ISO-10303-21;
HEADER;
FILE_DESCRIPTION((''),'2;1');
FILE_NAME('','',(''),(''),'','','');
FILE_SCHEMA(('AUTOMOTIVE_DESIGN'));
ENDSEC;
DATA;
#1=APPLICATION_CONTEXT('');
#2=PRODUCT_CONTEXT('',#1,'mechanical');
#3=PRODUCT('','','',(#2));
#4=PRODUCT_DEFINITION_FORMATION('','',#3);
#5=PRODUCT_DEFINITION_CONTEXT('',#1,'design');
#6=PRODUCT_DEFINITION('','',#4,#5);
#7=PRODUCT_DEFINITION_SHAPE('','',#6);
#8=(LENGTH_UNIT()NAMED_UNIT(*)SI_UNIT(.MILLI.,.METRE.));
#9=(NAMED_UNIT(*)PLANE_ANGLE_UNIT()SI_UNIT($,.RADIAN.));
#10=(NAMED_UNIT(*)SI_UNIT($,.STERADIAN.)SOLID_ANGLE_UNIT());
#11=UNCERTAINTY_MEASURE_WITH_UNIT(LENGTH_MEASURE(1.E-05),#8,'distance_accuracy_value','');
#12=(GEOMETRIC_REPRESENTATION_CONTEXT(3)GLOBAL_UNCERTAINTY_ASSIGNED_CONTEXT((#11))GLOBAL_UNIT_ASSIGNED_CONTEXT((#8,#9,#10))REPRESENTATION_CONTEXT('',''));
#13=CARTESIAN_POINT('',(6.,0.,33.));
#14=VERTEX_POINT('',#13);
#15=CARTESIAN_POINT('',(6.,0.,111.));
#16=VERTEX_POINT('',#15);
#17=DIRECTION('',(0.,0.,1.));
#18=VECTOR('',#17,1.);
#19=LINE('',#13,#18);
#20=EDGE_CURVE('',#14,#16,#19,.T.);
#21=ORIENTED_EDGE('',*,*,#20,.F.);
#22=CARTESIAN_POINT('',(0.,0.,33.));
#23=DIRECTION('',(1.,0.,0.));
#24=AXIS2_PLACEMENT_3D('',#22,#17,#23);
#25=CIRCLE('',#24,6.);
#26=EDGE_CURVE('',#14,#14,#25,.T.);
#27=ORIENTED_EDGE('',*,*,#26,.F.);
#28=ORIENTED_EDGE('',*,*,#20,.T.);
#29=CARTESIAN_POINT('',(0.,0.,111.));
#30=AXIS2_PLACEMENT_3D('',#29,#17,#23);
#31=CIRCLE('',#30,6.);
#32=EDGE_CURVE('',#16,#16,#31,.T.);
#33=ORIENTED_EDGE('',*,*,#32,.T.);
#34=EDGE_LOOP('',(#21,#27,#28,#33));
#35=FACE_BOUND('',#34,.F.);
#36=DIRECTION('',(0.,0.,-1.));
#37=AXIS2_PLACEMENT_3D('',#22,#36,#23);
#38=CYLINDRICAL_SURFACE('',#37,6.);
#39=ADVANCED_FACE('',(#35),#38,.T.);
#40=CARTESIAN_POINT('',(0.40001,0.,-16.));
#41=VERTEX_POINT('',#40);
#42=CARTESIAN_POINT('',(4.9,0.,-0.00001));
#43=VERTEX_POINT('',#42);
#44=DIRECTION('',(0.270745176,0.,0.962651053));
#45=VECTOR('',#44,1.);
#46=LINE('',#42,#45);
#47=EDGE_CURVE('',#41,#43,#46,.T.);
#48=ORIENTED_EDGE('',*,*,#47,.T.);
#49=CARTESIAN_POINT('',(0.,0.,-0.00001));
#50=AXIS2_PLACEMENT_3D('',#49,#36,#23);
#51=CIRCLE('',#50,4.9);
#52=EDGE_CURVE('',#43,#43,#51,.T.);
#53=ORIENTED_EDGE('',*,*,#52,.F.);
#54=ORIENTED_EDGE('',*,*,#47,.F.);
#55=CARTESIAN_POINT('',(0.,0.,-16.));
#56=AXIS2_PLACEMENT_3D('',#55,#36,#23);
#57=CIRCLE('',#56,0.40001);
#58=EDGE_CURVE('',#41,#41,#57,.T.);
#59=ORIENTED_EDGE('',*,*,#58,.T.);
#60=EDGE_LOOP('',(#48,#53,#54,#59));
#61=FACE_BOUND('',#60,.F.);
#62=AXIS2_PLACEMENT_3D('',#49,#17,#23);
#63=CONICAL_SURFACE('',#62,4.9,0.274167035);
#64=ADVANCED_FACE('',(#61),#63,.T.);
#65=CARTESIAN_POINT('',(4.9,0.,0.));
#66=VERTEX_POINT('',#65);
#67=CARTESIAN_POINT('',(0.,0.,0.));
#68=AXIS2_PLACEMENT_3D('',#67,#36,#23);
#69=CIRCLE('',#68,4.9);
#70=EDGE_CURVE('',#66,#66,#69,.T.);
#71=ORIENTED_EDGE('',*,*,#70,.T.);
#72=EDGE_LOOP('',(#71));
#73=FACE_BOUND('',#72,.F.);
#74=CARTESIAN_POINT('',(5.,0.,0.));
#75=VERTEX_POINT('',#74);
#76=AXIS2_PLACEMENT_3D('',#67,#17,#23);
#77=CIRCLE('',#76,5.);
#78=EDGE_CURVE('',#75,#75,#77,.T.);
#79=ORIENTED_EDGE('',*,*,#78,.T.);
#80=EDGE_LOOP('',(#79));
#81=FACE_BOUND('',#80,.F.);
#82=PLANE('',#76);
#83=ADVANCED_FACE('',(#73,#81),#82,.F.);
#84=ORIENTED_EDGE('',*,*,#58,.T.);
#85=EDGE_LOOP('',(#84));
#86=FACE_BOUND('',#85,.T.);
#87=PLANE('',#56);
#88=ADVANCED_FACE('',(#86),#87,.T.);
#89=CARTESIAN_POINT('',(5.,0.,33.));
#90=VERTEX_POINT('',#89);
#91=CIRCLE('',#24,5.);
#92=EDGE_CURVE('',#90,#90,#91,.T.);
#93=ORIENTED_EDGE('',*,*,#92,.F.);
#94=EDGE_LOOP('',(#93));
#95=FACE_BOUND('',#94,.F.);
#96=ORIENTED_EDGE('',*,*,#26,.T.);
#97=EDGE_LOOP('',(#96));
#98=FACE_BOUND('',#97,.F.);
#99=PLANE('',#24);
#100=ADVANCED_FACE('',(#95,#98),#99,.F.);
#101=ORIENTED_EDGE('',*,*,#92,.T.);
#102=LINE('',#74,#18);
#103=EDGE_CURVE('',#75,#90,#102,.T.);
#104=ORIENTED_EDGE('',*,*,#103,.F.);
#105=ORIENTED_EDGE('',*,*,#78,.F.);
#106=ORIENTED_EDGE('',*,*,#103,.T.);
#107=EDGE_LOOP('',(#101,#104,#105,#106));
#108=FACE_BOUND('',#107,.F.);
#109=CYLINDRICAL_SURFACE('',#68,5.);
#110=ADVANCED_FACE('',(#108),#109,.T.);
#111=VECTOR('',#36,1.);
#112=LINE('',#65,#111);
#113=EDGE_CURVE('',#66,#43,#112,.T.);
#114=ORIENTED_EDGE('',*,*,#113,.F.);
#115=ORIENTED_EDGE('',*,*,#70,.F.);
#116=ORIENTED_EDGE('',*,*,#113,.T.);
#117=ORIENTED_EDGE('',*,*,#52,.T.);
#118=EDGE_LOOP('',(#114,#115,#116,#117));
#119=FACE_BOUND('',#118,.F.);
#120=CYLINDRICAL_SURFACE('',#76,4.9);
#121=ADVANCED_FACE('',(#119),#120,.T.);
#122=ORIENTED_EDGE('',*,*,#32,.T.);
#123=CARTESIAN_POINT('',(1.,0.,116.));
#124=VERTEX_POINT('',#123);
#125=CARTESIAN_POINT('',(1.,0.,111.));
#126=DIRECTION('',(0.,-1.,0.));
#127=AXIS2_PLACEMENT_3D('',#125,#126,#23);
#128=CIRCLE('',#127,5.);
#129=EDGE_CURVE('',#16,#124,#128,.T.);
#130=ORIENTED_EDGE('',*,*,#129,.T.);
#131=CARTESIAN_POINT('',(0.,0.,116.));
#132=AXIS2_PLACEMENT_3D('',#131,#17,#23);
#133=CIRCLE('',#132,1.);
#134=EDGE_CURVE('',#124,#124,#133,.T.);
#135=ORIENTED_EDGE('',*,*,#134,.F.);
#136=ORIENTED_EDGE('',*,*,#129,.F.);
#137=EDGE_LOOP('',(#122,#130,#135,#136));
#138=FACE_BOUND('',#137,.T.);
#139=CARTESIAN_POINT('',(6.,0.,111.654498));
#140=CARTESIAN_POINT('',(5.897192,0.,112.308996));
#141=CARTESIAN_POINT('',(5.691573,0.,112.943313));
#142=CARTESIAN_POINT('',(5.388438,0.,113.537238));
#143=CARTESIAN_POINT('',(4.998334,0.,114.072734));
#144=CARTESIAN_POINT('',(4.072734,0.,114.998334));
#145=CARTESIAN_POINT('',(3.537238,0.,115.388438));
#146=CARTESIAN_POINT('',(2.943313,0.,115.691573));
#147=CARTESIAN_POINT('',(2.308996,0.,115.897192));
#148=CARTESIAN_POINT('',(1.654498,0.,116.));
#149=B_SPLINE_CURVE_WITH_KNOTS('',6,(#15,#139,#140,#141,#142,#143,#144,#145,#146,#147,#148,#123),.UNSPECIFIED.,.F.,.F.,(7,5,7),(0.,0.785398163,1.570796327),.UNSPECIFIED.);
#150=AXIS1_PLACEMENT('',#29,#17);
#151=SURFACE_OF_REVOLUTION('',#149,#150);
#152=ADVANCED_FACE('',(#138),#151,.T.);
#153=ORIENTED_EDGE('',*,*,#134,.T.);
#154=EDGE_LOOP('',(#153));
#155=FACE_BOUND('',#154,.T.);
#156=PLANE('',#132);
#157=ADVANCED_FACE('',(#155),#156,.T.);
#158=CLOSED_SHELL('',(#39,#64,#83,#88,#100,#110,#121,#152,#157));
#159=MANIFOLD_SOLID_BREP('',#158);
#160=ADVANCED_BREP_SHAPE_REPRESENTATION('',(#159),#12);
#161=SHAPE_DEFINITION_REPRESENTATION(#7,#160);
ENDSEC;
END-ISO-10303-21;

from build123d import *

# Parameters (mm, degrees)
F0_R     = 5
F1_DEPTH = 33
F2_R     = 4.9
F3_DEPTH = 16
F4_SIZE2 = 15.99999
F4_SIZE  = 4.49999
F5_R     = 6
F5_R_2   = 5
F6_DEPTH = 83
F7_R     = 5


# Not quite as in the source:
# - a fillet or chamfer is up to 0.001 mm smaller than in the source, because OpenCascade refuses the exact size


with BuildPart() as f1:
    # F0 (on Top) → F1 (new body)
    with BuildSketch(Plane.XY):
        Circle(F0_R)
    extrude(amount=F1_DEPTH)

    # F2 (on face) → F3 (join)
    with BuildSketch(Plane(origin=(0, 0, 0), x_dir=(1, 0, 0), z_dir=(0, 0, -1))):
        Circle(F2_R)
    extrude(amount=F3_DEPTH)

    # F4 (size 4.5 and 16 in the source; OpenCascade refuses exactly that, so slightly less here)
    f4_edges = [f1.edges().sort_by_distance(p)[0] for p in [
        (-4.9, 0, -16),
    ]]
    f4_side = f1.faces().sort_by_distance((0, 0, -16))[0]
    chamfer(f4_edges, length=F4_SIZE, length2=F4_SIZE2, reference=f4_side)

    # F5 (on face) → F6 (join)
    with BuildSketch(Plane.XY.offset(33)):
        Circle(F5_R)
        Circle(F5_R_2, mode=Mode.SUBTRACT)
        Circle(F5_R_2)
    extrude(amount=F6_DEPTH)

    # F7
    f7_edges = [f1.edges().sort_by_distance(p)[0] for p in [
        (-6, 0, 116),
    ]]
    fillet(f7_edges, radius=F7_R)


solid = f1.part
